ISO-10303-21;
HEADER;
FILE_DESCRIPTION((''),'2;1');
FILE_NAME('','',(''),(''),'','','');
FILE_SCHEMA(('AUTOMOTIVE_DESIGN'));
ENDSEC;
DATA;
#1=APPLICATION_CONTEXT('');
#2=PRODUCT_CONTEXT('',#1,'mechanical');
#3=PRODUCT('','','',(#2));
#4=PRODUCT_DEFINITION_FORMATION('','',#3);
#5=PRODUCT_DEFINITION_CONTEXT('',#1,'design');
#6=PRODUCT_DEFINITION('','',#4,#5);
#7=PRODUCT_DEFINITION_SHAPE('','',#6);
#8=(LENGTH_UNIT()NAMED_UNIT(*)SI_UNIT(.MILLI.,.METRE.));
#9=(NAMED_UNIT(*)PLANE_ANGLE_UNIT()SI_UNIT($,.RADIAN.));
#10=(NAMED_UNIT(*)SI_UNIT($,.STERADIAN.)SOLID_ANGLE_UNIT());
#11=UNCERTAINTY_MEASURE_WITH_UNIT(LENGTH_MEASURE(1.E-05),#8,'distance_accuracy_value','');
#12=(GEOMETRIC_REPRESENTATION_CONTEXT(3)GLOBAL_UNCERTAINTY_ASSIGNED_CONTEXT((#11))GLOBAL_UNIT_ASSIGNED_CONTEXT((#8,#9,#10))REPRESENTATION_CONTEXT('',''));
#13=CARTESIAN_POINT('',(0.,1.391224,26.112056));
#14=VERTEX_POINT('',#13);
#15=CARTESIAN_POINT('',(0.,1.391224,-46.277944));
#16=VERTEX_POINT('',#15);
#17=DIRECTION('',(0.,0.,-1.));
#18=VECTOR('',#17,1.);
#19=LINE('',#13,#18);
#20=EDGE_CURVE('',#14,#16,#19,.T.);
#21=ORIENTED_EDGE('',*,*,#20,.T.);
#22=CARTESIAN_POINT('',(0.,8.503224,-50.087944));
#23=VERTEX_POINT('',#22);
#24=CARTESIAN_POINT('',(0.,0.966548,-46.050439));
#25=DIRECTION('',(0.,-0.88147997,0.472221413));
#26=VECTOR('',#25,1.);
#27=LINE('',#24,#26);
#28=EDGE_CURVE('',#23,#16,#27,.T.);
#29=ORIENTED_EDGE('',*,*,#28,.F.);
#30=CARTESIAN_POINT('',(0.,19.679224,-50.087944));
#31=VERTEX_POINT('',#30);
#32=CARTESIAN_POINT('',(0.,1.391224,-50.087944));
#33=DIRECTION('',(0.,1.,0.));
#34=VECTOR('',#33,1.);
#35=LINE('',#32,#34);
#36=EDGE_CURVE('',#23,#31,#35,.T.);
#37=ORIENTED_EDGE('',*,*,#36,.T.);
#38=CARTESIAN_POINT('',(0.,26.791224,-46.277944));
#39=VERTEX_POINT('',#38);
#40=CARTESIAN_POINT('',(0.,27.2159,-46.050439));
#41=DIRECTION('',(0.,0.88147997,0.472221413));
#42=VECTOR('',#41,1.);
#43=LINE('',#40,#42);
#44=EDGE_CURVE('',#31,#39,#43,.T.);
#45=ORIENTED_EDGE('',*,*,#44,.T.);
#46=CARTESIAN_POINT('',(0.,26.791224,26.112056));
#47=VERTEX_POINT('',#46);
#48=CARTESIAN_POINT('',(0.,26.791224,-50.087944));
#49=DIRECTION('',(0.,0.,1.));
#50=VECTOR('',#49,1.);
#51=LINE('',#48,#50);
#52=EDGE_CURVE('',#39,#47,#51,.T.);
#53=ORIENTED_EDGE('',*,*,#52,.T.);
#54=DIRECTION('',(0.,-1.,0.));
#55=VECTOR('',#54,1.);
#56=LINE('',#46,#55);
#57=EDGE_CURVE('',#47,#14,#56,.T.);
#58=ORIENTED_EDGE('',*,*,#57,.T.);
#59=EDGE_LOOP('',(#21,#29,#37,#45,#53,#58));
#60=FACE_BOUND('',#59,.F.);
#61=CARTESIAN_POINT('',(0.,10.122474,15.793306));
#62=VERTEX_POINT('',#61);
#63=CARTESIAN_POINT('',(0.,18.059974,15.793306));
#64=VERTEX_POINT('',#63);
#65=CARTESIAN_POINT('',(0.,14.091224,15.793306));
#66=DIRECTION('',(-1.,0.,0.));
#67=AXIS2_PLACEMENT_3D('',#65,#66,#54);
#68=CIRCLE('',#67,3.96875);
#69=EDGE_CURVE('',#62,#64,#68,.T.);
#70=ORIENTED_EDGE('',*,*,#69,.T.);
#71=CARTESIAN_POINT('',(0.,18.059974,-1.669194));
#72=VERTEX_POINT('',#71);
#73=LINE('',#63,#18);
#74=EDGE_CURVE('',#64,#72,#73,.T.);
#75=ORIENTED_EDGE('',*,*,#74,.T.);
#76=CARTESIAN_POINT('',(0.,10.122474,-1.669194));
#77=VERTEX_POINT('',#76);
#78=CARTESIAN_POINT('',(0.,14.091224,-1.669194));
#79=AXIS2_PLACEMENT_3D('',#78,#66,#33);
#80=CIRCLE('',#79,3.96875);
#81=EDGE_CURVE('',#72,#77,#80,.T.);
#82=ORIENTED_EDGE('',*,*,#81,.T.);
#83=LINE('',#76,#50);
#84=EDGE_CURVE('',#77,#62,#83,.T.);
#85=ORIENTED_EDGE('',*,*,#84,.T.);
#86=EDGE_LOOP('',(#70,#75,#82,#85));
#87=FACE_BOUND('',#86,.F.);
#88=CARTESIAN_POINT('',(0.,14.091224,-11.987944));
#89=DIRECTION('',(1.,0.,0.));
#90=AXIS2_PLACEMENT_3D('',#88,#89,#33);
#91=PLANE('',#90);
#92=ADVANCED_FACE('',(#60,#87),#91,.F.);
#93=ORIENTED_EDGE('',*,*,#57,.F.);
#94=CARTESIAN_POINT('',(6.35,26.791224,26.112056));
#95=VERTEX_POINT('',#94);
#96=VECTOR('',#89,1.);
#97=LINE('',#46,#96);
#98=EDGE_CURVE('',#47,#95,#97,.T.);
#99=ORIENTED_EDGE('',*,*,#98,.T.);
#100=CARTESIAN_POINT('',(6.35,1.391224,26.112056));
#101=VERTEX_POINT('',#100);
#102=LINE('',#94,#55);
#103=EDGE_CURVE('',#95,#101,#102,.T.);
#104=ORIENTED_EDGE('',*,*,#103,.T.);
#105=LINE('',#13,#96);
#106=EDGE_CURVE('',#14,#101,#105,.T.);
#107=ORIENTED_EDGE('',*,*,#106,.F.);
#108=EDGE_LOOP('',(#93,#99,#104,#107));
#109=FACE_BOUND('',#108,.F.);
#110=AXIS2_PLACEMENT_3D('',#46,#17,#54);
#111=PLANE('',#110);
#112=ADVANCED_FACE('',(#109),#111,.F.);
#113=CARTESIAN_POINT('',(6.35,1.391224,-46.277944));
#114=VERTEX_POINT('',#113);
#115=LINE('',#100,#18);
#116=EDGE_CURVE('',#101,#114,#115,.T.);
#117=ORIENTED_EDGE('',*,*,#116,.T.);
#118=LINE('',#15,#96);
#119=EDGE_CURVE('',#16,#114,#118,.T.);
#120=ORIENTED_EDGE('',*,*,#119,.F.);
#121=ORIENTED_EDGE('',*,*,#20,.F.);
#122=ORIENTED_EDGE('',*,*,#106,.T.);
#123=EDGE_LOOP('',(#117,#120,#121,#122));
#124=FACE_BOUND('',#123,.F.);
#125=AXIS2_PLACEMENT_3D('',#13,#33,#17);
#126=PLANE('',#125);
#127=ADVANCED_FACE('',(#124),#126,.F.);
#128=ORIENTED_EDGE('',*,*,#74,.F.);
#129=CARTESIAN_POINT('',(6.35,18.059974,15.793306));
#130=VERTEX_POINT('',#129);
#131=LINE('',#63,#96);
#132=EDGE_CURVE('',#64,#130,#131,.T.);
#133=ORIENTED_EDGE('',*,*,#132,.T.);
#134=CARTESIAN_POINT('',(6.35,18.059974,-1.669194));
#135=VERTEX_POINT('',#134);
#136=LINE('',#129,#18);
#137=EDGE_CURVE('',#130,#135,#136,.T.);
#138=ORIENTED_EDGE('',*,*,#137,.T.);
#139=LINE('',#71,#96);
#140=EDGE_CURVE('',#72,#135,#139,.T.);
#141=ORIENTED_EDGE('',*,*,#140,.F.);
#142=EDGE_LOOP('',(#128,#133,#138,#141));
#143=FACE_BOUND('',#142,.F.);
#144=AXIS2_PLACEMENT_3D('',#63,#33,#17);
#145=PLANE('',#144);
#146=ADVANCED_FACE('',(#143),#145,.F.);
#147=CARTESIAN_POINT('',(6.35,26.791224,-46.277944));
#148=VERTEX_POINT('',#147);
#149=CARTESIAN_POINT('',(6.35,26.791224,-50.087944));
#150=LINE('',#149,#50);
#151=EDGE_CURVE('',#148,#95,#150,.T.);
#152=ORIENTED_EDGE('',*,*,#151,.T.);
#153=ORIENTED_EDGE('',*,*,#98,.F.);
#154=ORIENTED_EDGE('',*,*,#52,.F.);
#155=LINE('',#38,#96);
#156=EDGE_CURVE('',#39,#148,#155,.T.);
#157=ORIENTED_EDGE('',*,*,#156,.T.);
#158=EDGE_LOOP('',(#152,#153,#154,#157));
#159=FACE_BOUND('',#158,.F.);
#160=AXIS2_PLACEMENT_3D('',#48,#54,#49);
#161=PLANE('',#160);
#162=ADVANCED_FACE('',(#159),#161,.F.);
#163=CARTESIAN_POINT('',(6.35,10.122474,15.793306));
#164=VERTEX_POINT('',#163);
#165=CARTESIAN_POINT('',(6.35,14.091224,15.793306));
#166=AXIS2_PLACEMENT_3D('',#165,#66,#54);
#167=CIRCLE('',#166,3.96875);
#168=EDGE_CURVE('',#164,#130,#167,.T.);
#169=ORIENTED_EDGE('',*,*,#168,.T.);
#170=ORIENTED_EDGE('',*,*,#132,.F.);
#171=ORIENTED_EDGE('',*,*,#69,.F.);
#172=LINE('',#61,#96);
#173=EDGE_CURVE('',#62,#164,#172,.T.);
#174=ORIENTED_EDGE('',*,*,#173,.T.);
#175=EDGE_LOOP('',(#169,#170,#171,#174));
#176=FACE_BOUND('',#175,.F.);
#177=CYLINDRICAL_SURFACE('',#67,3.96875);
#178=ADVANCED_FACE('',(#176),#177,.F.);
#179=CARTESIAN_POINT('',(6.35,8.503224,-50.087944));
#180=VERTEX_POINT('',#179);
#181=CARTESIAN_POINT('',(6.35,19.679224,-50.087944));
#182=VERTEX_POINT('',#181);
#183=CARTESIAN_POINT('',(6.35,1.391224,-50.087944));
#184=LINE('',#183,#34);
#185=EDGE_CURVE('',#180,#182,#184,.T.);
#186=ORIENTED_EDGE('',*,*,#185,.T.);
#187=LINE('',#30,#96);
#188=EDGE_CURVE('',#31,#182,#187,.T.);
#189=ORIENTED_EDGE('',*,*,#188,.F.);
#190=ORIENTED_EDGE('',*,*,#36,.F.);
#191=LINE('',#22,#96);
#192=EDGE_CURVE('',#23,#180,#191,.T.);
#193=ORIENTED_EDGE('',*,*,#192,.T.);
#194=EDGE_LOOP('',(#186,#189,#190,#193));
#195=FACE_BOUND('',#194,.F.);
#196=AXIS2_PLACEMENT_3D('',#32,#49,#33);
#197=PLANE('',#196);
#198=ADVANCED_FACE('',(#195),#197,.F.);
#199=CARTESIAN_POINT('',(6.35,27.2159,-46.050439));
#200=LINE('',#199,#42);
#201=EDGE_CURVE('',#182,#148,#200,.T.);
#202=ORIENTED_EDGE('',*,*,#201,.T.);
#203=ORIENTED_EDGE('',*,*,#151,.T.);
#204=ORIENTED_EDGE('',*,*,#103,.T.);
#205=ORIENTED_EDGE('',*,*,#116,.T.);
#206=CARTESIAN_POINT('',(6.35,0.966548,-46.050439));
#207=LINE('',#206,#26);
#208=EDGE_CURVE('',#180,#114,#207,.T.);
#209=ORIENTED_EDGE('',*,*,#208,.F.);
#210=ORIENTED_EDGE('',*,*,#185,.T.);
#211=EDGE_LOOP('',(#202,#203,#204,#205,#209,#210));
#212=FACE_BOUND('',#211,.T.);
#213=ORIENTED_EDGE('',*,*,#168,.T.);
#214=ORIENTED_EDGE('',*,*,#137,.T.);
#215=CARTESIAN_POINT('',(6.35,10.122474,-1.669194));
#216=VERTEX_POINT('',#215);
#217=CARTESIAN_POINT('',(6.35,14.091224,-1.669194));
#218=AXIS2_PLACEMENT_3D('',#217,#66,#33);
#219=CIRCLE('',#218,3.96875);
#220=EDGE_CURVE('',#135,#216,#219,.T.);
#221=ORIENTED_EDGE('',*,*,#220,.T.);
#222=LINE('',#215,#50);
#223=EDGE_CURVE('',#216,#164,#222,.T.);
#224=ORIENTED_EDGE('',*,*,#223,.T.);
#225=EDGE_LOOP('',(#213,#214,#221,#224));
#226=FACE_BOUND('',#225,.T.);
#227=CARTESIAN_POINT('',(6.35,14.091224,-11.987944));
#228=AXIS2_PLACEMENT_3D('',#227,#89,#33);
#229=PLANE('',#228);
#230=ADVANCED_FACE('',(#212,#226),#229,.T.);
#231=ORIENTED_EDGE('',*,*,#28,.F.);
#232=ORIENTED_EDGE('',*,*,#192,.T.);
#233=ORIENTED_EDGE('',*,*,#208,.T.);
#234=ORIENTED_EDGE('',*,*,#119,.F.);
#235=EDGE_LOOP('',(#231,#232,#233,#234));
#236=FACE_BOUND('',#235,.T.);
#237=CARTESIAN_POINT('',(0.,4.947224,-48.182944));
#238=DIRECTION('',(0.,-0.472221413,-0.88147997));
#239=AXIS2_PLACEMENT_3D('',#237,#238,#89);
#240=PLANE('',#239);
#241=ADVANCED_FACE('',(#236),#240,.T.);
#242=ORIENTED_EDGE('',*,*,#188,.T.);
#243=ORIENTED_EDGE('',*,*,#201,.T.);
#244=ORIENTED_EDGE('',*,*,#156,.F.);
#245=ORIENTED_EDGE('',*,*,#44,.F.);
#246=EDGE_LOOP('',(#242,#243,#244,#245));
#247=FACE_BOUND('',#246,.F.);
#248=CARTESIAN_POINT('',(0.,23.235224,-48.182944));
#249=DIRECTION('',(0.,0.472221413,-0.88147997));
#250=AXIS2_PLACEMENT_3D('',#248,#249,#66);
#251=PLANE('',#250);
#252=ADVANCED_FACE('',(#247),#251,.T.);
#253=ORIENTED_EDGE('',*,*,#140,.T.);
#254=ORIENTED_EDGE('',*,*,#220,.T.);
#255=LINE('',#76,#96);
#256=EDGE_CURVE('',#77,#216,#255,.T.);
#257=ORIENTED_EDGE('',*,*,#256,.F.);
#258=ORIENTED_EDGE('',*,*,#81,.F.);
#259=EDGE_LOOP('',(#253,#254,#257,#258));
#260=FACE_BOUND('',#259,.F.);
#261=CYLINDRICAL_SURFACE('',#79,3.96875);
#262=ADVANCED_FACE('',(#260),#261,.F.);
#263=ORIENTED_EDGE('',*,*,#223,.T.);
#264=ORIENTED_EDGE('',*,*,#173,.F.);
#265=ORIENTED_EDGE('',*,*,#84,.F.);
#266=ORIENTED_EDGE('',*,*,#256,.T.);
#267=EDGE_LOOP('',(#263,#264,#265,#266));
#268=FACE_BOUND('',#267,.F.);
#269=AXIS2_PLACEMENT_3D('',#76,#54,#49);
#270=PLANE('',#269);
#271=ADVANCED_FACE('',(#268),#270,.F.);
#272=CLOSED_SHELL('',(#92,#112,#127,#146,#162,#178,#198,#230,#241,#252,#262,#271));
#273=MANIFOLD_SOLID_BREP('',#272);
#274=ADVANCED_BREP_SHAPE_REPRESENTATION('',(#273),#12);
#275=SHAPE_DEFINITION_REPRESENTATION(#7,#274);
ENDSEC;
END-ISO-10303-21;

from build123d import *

# Parameters (mm, degrees)
F1_DEPTH = 6.35
F2_SIZE2 = 3.81
F2_SIZE  = 7.112


with BuildPart() as f1:
    # F0 (on Right) → F1 (new body)
    with BuildSketch(Plane.YZ):
        Polygon((26.7912242562, 26.1120563269), (1.3912242562, 26.1120563269), (1.3912242562, -50.0879436731), (26.7912242562, -50.0879436731), (26.7912242562, 3.7854563269), (26.7912242562, 9.8814563269), align=None)
        with BuildLine():
            ThreePointArc((10.1224742562, 15.7933063269), (14.0912242562, 19.7620563269), (18.0599742562, 15.7933063269))
            Line((18.0599742562, 15.7933063269), (18.0599742562, -1.6691936731))
            ThreePointArc((18.0599742562, -1.6691936731), (14.0912242562, -5.6379436731), (10.1224742562, -1.6691936731))
            Line((10.1224742562, -1.6691936731), (10.1224742562, 15.7933063269))
        make_face(mode=Mode.SUBTRACT)
    extrude(amount=F1_DEPTH)

    # F2
    f2_edges = [f1.edges().sort_by_distance(p)[0] for p in [
        (3.175, 1.391224, -50.087944),
        (3.175, 26.791224, -50.087944),
    ]]
    f2_side = f1.faces().sort_by_distance((3.175, 14.091224, -50.087944))[0]
    chamfer(f2_edges, length=F2_SIZE, length2=F2_SIZE2, reference=f2_side)


solid = f1.part
